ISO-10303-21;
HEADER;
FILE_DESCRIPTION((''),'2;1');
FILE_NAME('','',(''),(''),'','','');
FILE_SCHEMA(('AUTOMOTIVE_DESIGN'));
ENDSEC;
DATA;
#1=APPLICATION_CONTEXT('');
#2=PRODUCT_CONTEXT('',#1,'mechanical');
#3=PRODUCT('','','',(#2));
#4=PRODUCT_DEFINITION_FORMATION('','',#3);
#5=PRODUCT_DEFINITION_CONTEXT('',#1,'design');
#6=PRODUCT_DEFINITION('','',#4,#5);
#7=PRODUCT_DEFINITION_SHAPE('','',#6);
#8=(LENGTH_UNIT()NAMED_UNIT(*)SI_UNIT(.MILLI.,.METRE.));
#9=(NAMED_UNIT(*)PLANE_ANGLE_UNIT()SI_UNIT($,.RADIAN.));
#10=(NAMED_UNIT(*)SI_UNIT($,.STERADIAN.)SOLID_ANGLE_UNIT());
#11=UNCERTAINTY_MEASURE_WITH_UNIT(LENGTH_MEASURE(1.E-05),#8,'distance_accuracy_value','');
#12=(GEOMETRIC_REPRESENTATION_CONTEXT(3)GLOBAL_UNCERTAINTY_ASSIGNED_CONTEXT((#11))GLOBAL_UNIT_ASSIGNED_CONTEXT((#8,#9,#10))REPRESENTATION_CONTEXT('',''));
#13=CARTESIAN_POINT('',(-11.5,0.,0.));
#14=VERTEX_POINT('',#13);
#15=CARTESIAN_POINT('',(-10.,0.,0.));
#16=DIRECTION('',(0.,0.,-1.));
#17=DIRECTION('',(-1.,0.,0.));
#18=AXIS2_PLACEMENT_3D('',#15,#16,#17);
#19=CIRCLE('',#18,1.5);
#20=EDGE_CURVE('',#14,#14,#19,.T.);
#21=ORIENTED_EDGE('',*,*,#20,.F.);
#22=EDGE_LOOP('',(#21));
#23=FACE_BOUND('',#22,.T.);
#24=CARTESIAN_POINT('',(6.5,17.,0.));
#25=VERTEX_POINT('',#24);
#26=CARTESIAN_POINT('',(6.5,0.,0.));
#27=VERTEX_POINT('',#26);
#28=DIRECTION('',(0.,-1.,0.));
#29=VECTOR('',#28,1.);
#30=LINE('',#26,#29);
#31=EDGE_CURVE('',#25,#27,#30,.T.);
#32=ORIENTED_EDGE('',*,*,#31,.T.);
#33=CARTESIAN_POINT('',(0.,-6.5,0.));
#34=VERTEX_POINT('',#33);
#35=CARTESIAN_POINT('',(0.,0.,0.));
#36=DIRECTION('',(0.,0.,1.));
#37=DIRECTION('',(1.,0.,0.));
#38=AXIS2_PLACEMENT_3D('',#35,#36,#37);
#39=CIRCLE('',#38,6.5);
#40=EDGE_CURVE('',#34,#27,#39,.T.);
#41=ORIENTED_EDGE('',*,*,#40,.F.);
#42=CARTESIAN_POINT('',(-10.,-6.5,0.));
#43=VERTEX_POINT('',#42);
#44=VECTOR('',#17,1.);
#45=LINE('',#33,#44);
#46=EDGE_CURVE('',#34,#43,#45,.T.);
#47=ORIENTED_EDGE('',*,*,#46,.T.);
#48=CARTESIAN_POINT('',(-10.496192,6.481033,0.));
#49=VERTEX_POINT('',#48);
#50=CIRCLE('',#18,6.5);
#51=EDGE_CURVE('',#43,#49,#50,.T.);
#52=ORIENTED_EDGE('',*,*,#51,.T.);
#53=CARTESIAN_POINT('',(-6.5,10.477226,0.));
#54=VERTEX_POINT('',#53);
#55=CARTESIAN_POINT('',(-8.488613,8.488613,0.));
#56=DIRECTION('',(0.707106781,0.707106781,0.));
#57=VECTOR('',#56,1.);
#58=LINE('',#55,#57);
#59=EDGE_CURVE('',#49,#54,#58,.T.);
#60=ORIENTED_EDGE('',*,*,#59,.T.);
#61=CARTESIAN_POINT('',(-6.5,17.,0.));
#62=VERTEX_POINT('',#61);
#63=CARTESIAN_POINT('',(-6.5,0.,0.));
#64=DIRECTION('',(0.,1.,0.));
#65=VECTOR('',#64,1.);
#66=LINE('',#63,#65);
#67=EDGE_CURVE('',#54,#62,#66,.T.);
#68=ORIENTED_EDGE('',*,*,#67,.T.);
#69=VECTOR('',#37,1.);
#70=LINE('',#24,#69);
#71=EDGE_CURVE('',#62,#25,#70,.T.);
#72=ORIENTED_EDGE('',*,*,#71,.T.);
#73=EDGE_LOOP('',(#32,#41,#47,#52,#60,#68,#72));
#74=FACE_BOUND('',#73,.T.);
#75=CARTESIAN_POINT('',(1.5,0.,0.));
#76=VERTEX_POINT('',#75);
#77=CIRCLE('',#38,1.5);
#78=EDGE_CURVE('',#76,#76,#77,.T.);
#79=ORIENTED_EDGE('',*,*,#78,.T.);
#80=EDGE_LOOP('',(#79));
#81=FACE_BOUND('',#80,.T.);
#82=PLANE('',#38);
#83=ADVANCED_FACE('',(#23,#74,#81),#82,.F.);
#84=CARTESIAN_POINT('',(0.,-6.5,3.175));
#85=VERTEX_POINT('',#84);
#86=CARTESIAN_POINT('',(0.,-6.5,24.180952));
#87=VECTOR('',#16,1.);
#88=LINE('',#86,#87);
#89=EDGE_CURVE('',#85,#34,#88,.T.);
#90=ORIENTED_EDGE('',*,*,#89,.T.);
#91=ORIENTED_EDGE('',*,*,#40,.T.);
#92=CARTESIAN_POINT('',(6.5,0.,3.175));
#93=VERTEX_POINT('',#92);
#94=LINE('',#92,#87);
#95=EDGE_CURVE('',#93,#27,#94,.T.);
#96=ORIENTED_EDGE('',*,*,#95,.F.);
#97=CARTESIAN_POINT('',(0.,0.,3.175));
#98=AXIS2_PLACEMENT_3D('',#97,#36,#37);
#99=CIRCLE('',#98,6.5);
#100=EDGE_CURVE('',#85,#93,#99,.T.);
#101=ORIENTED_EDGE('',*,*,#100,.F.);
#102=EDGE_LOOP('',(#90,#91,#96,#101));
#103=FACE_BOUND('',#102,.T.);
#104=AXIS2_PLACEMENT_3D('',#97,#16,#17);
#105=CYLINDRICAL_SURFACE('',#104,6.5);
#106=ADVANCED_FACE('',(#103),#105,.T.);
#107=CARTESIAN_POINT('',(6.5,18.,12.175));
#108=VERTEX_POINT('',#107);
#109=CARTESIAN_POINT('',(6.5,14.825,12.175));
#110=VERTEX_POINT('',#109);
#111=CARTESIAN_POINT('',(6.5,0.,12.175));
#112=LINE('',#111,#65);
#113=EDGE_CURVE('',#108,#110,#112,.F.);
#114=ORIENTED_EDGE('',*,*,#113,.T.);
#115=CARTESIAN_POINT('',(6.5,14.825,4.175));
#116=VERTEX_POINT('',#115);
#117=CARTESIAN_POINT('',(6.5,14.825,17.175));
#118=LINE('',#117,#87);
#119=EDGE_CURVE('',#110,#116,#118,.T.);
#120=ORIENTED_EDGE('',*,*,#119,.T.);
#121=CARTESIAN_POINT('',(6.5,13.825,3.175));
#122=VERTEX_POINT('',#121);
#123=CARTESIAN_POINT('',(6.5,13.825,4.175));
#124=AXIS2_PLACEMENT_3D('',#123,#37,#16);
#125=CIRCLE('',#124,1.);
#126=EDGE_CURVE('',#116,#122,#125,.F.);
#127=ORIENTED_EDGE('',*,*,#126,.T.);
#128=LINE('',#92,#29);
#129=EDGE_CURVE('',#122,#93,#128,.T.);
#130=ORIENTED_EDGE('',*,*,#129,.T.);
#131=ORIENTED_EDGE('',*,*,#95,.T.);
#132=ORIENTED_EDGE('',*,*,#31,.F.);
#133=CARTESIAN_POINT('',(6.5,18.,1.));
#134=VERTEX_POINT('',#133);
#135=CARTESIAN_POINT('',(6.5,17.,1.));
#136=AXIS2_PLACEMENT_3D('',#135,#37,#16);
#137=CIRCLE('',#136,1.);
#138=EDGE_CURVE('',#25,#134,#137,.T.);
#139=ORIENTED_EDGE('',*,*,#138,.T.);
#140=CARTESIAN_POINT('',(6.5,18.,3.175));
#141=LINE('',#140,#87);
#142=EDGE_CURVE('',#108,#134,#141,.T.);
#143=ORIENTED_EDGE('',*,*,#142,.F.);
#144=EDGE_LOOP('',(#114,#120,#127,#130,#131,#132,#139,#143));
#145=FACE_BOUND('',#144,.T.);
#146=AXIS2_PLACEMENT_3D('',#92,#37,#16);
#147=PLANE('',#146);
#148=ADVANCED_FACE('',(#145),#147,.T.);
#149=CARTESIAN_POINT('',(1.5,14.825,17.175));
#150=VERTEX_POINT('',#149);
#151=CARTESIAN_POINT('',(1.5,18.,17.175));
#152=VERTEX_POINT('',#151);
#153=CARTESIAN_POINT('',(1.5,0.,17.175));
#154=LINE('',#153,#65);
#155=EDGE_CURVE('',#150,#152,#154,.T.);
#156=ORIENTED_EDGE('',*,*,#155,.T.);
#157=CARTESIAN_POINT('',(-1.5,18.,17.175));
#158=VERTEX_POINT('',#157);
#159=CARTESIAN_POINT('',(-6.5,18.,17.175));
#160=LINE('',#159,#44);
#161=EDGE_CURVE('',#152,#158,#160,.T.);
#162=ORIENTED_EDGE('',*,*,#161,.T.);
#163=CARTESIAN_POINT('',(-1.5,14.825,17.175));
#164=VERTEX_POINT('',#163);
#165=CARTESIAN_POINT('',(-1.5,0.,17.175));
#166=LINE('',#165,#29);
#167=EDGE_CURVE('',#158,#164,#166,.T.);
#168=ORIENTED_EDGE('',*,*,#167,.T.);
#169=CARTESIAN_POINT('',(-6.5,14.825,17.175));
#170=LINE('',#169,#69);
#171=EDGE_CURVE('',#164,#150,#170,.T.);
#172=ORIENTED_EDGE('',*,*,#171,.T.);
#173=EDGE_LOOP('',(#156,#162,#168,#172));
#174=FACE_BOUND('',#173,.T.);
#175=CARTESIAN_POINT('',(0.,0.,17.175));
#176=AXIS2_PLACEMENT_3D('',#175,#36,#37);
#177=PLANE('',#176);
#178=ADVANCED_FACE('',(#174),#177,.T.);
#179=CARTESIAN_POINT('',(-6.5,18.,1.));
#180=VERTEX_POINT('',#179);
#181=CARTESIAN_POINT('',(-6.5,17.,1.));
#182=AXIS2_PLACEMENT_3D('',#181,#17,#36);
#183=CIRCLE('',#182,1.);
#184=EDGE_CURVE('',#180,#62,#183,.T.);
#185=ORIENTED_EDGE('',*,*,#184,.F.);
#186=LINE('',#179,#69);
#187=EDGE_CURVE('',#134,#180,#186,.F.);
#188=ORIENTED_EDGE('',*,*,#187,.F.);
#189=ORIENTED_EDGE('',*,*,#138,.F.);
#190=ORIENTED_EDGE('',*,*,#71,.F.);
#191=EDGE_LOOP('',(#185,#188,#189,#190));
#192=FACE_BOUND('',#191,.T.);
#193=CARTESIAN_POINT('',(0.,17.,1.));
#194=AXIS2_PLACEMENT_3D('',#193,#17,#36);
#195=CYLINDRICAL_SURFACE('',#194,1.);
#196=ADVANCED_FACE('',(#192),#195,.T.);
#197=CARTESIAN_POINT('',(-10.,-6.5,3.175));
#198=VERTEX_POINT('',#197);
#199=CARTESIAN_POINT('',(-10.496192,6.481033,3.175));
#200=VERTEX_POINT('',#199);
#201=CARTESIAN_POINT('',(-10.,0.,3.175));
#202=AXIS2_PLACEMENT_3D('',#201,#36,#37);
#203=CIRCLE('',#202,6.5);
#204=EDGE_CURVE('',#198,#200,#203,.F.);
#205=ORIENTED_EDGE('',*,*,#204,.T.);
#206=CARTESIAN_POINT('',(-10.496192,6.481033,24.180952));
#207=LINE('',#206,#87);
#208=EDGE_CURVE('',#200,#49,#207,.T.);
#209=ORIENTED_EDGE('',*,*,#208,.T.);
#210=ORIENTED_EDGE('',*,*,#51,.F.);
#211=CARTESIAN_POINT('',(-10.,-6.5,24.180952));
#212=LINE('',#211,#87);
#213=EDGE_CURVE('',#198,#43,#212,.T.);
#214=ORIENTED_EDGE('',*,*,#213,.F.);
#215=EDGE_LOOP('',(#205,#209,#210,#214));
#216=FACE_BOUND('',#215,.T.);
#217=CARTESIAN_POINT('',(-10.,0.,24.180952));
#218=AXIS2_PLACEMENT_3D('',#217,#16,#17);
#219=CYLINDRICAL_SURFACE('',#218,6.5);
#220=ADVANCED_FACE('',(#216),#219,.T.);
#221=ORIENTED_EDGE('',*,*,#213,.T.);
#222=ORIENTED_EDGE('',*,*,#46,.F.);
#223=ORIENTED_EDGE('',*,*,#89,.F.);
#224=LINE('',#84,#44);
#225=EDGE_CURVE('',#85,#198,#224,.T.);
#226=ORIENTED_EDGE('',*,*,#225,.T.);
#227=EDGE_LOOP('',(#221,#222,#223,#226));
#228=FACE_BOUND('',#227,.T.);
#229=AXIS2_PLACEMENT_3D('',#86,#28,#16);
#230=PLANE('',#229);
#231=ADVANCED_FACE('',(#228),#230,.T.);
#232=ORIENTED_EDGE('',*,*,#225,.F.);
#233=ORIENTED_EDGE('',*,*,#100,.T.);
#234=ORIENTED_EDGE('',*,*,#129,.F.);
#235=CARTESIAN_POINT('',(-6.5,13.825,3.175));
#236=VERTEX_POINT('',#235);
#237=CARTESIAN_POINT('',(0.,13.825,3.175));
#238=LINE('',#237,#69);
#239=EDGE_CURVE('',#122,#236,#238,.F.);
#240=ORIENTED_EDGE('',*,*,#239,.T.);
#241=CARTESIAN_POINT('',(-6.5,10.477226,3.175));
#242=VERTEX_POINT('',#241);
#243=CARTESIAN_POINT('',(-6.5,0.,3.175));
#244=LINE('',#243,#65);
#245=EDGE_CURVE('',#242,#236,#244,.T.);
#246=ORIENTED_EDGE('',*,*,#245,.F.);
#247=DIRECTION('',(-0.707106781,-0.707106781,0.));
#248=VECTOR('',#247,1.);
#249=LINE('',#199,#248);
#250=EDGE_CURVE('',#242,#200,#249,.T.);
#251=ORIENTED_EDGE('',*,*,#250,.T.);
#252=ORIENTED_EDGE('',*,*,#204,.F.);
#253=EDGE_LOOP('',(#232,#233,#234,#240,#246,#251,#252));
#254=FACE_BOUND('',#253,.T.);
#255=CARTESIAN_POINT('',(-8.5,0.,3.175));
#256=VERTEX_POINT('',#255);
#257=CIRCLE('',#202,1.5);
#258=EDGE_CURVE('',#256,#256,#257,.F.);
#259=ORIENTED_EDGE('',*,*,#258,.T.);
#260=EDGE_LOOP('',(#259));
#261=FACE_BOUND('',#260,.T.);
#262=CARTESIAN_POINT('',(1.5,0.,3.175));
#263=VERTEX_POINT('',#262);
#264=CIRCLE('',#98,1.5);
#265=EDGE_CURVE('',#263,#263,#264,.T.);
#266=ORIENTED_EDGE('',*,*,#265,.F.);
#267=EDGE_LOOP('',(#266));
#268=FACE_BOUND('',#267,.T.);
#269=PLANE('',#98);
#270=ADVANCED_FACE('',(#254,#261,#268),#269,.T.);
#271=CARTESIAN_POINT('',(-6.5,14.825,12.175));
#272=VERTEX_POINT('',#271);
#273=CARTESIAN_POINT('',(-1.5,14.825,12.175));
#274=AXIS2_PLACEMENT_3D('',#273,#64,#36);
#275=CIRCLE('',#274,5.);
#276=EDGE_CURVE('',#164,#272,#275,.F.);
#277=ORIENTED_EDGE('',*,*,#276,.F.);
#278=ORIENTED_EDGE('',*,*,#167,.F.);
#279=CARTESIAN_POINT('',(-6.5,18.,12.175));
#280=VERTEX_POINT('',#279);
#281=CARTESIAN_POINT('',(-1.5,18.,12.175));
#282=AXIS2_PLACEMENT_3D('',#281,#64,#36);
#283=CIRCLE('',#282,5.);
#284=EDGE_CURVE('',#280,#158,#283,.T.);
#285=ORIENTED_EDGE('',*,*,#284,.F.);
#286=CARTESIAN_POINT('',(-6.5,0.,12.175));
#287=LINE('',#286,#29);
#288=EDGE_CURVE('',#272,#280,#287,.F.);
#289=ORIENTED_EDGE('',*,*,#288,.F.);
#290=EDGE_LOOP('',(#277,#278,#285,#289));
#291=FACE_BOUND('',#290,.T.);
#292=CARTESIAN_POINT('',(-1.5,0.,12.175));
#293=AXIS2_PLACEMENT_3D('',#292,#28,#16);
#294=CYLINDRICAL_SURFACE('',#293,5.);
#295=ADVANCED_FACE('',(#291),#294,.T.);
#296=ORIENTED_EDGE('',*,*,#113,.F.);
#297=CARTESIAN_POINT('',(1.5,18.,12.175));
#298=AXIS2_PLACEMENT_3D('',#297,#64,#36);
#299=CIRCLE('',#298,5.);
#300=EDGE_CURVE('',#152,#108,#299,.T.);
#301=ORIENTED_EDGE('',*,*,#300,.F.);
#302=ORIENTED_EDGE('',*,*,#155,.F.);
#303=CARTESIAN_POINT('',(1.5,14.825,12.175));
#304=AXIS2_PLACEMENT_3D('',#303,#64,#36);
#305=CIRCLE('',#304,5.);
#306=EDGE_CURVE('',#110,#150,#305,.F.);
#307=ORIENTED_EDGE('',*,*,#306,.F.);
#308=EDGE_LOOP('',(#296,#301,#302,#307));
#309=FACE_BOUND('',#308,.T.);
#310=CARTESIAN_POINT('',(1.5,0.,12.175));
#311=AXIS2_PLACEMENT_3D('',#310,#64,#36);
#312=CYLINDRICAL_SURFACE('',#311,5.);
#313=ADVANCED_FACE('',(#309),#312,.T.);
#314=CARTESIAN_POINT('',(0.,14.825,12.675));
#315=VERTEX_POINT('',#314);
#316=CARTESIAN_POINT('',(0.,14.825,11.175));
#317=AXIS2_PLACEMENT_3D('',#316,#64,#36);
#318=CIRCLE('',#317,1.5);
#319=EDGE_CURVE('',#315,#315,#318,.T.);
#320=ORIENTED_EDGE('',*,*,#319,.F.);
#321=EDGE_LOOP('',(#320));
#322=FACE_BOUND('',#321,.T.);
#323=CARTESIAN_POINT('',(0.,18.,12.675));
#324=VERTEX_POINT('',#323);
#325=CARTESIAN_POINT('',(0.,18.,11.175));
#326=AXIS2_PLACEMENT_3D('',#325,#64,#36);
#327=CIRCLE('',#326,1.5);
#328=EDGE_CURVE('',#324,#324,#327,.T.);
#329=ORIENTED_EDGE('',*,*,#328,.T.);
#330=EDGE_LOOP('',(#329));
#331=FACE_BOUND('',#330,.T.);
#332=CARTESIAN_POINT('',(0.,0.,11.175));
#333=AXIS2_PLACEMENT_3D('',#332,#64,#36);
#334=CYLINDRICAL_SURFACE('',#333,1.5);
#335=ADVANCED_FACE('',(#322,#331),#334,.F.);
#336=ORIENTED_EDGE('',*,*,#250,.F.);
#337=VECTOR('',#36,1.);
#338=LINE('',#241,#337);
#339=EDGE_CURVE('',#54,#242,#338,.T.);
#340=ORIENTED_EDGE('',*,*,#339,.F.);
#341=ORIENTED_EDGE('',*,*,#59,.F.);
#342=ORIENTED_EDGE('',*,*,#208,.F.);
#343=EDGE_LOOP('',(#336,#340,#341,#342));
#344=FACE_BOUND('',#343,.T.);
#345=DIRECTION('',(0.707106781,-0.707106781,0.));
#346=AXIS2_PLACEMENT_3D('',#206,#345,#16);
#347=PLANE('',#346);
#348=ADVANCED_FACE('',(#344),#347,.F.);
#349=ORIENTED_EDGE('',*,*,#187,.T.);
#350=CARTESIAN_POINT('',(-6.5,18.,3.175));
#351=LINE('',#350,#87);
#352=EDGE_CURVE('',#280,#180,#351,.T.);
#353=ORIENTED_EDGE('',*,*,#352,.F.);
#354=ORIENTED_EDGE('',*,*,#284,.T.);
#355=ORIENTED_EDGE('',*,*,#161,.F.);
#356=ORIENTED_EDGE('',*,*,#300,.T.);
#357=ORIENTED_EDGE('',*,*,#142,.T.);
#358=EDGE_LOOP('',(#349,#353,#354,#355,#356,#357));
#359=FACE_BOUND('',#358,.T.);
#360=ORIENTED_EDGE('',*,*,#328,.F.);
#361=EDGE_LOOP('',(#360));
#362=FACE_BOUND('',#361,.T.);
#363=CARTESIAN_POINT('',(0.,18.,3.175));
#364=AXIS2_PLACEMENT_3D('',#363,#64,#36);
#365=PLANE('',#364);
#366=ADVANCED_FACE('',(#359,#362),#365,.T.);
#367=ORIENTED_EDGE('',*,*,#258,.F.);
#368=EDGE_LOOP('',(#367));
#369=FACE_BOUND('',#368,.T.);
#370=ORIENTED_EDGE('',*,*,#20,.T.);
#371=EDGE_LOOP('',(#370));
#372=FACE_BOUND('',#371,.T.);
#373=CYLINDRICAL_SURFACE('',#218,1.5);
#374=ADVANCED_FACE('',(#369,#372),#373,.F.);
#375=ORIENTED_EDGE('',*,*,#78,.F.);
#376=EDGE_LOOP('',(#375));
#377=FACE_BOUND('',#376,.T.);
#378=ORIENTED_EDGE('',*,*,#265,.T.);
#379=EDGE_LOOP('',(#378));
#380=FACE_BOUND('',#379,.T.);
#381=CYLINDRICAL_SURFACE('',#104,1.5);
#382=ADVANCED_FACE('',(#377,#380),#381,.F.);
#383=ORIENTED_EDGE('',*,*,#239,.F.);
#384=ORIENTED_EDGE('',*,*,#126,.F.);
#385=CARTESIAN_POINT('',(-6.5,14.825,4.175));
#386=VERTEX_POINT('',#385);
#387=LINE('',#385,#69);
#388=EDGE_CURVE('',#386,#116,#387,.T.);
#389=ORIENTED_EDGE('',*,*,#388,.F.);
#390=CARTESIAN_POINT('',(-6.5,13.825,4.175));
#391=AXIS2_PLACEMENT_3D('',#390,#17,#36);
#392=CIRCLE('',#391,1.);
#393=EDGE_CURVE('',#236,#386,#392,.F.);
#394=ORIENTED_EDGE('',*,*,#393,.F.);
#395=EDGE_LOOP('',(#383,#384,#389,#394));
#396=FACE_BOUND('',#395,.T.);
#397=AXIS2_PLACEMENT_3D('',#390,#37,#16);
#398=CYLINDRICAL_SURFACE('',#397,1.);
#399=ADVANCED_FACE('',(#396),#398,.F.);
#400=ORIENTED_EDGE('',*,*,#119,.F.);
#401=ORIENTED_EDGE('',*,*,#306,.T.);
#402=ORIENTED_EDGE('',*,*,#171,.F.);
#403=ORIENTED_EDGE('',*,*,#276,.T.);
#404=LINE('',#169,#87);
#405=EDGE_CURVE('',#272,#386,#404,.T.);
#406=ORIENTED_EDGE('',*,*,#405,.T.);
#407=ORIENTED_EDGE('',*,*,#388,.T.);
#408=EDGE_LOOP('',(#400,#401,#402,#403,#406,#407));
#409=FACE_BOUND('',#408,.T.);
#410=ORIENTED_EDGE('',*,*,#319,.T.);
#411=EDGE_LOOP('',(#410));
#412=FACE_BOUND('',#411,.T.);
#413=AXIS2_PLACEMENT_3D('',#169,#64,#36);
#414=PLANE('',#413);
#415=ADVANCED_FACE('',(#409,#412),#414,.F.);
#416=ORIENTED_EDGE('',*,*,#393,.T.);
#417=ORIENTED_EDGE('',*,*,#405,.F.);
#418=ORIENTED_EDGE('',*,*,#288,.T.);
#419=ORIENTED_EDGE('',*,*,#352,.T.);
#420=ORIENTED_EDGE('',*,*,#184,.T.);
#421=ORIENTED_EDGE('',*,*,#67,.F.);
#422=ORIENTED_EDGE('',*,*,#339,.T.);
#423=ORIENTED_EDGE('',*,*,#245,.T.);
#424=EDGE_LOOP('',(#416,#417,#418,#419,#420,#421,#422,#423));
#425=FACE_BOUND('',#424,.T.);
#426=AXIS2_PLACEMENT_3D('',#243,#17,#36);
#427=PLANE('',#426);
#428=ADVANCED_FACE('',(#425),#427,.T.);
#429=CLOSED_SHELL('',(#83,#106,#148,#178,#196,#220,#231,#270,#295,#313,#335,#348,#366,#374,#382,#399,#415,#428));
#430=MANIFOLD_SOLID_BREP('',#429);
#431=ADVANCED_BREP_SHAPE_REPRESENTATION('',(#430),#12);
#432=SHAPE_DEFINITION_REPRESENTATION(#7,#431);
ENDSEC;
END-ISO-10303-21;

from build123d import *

# Parameters (mm, degrees)
SKETCH1_R               = 6.5
SKETCH1_R_2             = 1.5
BOSS_EXTRUDE1_DEPTH     = 3.175
SKETCH2_W               = 13
SKETCH2_H               = 3.175
BOSS_EXTRUDE2_DEPTH     = 14
SKETCH3_R               = 1.5
CUT_EXTRUDE1_DEPTH      = 18
FILLET1_R               = 5
BOSS_EXTRUDE3_START     = -3.175
BOSS_EXTRUDE3_OUTLINE_R = 1.5
BOSS_EXTRUDE3_DEPTH     = 3.175
FILLET3_R               = 1
CHAMFER1_SIZE           = 5


with BuildPart() as part:
    # Sketch1 → Boss-Extrude1 (new body)
    # profile 1 of 2: a face of its own
    with BuildSketch(Plane.XY):
        Circle(SKETCH1_R)
        Circle(SKETCH1_R_2, mode=Mode.SUBTRACT)
    # profile 2 of 2: a face of its own
    with BuildSketch(Plane.XY):
        with BuildLine():
            Line((-6.5, 18), (-6.5, 0))
            ThreePointArc((-6.5, 0), (0, 6.5), (6.5, 0))
            Line((6.5, 0), (6.5, 18))
            Line((6.5, 18), (-6.5, 18))
        make_face()
    extrude(amount=BOSS_EXTRUDE1_DEPTH)

    # Sketch2 → Boss-Extrude2 (add)
    with BuildSketch(Plane.XY.offset(3.175)):
        with Locations((0, 16.4125)):
            Rectangle(SKETCH2_W, SKETCH2_H)
    extrude(amount=BOSS_EXTRUDE2_DEPTH)

    # Sketch3 → Cut-Extrude1 (cut)
    with BuildSketch(Plane(origin=(0, 18, 0), x_dir=(1, 0, 0), z_dir=(0, 1, 0))):
        with Locations(Location((0, -11.175, 0), (0, 0, 270))):
            Circle(SKETCH3_R)
    extrude(amount=-CUT_EXTRUDE1_DEPTH, mode=Mode.SUBTRACT)

    # Fillet1
    fillet1_edges = [part.edges().sort_by_distance(p)[0] for p in [
        (-6.5, 16.4125, 17.175),
        (6.5, 16.4125, 17.175),
    ]]
    fillet(fillet1_edges, radius=FILLET1_R)

    # Boss-Extrude3: read off the stored shape, not the designer's step
    # Boss-Extrude3 outline → Boss-Extrude3 (add)
    with BuildSketch(Plane(origin=(0, 0, 0), x_dir=(-1, 0, 0), z_dir=(0, 0, -1)).offset(BOSS_EXTRUDE3_START)):
        with BuildLine():
            ThreePointArc((6.5, 0), (4.596194078, -4.596194078), (0, -6.5))
            Line((0, -6.5), (10, -6.5))
            ThreePointArc((10, -6.5), (16.239069091, 1.823188658), (6.5, 5.477225575))
            Line((6.5, 5.477225575), (6.5, 0))
        make_face()
        with Locations((10, 0)):
            Circle(BOSS_EXTRUDE3_OUTLINE_R, mode=Mode.SUBTRACT)
    extrude(amount=BOSS_EXTRUDE3_DEPTH)

    # Fillet3
    fillet3_edges = [part.edges().sort_by_distance(p)[0] for p in [
        (0, 14.825, 3.175),
        (0, 18, 0),
    ]]
    fillet(fillet3_edges, radius=FILLET3_R)

    # Chamfer1
    # the kernel refuses this chamfer: 5, 3.62027218 mm, written as the material it adds along each edge
    with BuildSketch(Plane(origin=(-6.5, 5.477225575, 3.175), x_dir=(0, 1, 0), z_dir=(0, 0, -1))) as chamfer1_piece_1:
        with BuildLine():
            Line((CHAMFER1_SIZE, 0), (1.003807775, -3.996192225))
            ThreePointArc((1.003807775, -3.996192225), (0.840081721, -1.969761939), (0, 0))
            Line((0, 0), (CHAMFER1_SIZE, 0))
        make_face()
    extrude(amount=3.175)


solid = part.part
